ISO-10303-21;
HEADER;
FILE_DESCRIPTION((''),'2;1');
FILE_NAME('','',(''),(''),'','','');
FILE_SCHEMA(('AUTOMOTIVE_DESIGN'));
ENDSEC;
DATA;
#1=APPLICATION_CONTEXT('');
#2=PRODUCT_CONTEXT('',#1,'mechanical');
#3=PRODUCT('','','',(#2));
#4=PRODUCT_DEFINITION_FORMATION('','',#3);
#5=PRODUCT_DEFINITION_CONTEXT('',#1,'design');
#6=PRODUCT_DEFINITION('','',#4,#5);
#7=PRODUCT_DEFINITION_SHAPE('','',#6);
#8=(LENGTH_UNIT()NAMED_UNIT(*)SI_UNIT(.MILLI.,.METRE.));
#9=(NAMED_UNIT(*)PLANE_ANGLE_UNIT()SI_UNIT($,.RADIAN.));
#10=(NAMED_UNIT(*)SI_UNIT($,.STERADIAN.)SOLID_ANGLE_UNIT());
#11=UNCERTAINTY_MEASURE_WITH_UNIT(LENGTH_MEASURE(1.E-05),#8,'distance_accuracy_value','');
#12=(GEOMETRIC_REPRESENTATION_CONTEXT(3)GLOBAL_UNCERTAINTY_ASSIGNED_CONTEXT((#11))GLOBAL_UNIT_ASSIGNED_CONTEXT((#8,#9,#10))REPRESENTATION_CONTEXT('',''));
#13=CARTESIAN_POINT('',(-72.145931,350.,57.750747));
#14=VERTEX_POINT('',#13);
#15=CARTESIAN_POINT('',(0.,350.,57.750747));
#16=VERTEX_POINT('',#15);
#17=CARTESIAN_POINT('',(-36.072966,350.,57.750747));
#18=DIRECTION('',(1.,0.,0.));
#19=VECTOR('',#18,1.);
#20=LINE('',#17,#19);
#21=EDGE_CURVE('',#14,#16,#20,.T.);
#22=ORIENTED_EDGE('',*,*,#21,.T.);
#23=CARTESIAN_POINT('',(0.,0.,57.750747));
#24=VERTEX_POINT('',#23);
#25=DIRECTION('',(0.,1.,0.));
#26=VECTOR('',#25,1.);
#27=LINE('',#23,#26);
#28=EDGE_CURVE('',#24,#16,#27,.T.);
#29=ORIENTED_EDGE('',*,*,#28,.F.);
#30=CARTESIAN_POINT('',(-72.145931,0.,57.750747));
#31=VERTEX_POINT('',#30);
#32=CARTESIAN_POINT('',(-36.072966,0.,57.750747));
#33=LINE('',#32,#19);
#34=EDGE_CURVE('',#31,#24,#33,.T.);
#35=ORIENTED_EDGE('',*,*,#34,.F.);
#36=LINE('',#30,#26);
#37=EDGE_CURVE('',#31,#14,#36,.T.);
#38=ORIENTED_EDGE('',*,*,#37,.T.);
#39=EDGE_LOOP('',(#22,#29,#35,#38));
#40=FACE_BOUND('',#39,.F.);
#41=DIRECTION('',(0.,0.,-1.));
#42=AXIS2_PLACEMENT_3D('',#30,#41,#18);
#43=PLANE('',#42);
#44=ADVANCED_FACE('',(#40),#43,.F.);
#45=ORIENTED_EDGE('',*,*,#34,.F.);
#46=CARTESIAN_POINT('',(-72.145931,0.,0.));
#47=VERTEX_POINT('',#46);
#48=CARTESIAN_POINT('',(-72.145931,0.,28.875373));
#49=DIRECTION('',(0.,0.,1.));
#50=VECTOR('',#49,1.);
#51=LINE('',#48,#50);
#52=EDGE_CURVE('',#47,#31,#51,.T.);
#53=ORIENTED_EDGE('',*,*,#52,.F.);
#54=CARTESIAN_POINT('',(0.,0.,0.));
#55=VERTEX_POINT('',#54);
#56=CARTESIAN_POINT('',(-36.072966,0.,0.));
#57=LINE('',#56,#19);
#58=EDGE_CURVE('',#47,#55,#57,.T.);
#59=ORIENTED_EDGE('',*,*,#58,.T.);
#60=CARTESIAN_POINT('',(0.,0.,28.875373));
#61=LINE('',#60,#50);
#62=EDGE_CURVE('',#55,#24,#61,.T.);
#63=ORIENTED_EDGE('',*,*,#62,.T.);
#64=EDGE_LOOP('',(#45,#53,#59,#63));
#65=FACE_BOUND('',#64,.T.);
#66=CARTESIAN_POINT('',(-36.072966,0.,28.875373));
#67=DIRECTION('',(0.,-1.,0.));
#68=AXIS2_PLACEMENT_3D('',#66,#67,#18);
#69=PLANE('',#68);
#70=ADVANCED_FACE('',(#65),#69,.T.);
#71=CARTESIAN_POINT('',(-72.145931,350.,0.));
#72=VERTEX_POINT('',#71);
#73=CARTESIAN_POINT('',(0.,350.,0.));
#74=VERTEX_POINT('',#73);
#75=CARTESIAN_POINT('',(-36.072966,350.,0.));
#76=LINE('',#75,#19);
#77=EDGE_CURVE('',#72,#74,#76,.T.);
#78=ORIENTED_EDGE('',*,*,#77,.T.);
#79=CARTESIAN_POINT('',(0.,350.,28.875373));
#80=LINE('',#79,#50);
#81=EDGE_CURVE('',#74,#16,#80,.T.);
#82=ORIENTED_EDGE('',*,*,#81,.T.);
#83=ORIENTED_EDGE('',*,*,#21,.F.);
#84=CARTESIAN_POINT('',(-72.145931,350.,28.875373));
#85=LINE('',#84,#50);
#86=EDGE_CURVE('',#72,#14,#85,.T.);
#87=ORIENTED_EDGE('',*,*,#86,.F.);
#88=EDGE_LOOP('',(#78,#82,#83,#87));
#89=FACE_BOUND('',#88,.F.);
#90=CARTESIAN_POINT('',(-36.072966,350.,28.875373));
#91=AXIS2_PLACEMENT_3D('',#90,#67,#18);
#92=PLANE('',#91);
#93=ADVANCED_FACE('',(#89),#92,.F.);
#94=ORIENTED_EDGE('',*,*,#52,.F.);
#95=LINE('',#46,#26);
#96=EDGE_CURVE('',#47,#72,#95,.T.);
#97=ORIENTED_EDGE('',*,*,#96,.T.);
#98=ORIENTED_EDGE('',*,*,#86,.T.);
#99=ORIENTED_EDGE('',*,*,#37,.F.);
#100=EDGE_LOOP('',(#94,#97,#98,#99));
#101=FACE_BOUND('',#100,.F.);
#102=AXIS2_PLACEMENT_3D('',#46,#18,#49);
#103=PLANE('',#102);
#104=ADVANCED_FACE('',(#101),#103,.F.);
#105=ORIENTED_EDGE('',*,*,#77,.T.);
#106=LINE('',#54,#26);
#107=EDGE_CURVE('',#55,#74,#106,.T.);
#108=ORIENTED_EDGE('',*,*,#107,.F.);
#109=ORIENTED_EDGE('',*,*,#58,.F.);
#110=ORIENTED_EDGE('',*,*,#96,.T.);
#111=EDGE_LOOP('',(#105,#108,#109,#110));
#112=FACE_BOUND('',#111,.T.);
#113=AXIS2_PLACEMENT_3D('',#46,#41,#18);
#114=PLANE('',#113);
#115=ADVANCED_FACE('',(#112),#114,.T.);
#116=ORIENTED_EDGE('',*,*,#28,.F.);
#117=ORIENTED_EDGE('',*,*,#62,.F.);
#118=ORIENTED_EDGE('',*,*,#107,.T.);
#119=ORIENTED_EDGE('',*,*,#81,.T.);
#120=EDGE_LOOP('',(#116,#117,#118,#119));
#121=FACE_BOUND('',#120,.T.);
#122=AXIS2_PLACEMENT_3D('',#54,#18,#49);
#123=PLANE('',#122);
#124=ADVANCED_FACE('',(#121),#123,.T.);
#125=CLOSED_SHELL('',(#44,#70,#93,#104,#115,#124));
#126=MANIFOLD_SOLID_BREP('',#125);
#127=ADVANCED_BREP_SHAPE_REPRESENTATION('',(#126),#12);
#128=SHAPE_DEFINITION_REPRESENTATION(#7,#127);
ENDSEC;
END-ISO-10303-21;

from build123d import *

# Parameters (mm, degrees)
F0_W     = 72.1459314227
F0_H     = 57.7507466078
F1_DEPTH = 350


# Not quite as in the source:
# - the program builds the solid bodies; features that only make, move or delete a surface that nothing else refers to are left out


with BuildPart() as f1:
    # F0 (on Front) → F1 (new body)
    with BuildSketch(Plane.XZ):
        with Locations((-36.0729657114, 28.8753733039)):
            Rectangle(F0_W, F0_H)
    extrude(amount=-F1_DEPTH)


solid = f1.part
